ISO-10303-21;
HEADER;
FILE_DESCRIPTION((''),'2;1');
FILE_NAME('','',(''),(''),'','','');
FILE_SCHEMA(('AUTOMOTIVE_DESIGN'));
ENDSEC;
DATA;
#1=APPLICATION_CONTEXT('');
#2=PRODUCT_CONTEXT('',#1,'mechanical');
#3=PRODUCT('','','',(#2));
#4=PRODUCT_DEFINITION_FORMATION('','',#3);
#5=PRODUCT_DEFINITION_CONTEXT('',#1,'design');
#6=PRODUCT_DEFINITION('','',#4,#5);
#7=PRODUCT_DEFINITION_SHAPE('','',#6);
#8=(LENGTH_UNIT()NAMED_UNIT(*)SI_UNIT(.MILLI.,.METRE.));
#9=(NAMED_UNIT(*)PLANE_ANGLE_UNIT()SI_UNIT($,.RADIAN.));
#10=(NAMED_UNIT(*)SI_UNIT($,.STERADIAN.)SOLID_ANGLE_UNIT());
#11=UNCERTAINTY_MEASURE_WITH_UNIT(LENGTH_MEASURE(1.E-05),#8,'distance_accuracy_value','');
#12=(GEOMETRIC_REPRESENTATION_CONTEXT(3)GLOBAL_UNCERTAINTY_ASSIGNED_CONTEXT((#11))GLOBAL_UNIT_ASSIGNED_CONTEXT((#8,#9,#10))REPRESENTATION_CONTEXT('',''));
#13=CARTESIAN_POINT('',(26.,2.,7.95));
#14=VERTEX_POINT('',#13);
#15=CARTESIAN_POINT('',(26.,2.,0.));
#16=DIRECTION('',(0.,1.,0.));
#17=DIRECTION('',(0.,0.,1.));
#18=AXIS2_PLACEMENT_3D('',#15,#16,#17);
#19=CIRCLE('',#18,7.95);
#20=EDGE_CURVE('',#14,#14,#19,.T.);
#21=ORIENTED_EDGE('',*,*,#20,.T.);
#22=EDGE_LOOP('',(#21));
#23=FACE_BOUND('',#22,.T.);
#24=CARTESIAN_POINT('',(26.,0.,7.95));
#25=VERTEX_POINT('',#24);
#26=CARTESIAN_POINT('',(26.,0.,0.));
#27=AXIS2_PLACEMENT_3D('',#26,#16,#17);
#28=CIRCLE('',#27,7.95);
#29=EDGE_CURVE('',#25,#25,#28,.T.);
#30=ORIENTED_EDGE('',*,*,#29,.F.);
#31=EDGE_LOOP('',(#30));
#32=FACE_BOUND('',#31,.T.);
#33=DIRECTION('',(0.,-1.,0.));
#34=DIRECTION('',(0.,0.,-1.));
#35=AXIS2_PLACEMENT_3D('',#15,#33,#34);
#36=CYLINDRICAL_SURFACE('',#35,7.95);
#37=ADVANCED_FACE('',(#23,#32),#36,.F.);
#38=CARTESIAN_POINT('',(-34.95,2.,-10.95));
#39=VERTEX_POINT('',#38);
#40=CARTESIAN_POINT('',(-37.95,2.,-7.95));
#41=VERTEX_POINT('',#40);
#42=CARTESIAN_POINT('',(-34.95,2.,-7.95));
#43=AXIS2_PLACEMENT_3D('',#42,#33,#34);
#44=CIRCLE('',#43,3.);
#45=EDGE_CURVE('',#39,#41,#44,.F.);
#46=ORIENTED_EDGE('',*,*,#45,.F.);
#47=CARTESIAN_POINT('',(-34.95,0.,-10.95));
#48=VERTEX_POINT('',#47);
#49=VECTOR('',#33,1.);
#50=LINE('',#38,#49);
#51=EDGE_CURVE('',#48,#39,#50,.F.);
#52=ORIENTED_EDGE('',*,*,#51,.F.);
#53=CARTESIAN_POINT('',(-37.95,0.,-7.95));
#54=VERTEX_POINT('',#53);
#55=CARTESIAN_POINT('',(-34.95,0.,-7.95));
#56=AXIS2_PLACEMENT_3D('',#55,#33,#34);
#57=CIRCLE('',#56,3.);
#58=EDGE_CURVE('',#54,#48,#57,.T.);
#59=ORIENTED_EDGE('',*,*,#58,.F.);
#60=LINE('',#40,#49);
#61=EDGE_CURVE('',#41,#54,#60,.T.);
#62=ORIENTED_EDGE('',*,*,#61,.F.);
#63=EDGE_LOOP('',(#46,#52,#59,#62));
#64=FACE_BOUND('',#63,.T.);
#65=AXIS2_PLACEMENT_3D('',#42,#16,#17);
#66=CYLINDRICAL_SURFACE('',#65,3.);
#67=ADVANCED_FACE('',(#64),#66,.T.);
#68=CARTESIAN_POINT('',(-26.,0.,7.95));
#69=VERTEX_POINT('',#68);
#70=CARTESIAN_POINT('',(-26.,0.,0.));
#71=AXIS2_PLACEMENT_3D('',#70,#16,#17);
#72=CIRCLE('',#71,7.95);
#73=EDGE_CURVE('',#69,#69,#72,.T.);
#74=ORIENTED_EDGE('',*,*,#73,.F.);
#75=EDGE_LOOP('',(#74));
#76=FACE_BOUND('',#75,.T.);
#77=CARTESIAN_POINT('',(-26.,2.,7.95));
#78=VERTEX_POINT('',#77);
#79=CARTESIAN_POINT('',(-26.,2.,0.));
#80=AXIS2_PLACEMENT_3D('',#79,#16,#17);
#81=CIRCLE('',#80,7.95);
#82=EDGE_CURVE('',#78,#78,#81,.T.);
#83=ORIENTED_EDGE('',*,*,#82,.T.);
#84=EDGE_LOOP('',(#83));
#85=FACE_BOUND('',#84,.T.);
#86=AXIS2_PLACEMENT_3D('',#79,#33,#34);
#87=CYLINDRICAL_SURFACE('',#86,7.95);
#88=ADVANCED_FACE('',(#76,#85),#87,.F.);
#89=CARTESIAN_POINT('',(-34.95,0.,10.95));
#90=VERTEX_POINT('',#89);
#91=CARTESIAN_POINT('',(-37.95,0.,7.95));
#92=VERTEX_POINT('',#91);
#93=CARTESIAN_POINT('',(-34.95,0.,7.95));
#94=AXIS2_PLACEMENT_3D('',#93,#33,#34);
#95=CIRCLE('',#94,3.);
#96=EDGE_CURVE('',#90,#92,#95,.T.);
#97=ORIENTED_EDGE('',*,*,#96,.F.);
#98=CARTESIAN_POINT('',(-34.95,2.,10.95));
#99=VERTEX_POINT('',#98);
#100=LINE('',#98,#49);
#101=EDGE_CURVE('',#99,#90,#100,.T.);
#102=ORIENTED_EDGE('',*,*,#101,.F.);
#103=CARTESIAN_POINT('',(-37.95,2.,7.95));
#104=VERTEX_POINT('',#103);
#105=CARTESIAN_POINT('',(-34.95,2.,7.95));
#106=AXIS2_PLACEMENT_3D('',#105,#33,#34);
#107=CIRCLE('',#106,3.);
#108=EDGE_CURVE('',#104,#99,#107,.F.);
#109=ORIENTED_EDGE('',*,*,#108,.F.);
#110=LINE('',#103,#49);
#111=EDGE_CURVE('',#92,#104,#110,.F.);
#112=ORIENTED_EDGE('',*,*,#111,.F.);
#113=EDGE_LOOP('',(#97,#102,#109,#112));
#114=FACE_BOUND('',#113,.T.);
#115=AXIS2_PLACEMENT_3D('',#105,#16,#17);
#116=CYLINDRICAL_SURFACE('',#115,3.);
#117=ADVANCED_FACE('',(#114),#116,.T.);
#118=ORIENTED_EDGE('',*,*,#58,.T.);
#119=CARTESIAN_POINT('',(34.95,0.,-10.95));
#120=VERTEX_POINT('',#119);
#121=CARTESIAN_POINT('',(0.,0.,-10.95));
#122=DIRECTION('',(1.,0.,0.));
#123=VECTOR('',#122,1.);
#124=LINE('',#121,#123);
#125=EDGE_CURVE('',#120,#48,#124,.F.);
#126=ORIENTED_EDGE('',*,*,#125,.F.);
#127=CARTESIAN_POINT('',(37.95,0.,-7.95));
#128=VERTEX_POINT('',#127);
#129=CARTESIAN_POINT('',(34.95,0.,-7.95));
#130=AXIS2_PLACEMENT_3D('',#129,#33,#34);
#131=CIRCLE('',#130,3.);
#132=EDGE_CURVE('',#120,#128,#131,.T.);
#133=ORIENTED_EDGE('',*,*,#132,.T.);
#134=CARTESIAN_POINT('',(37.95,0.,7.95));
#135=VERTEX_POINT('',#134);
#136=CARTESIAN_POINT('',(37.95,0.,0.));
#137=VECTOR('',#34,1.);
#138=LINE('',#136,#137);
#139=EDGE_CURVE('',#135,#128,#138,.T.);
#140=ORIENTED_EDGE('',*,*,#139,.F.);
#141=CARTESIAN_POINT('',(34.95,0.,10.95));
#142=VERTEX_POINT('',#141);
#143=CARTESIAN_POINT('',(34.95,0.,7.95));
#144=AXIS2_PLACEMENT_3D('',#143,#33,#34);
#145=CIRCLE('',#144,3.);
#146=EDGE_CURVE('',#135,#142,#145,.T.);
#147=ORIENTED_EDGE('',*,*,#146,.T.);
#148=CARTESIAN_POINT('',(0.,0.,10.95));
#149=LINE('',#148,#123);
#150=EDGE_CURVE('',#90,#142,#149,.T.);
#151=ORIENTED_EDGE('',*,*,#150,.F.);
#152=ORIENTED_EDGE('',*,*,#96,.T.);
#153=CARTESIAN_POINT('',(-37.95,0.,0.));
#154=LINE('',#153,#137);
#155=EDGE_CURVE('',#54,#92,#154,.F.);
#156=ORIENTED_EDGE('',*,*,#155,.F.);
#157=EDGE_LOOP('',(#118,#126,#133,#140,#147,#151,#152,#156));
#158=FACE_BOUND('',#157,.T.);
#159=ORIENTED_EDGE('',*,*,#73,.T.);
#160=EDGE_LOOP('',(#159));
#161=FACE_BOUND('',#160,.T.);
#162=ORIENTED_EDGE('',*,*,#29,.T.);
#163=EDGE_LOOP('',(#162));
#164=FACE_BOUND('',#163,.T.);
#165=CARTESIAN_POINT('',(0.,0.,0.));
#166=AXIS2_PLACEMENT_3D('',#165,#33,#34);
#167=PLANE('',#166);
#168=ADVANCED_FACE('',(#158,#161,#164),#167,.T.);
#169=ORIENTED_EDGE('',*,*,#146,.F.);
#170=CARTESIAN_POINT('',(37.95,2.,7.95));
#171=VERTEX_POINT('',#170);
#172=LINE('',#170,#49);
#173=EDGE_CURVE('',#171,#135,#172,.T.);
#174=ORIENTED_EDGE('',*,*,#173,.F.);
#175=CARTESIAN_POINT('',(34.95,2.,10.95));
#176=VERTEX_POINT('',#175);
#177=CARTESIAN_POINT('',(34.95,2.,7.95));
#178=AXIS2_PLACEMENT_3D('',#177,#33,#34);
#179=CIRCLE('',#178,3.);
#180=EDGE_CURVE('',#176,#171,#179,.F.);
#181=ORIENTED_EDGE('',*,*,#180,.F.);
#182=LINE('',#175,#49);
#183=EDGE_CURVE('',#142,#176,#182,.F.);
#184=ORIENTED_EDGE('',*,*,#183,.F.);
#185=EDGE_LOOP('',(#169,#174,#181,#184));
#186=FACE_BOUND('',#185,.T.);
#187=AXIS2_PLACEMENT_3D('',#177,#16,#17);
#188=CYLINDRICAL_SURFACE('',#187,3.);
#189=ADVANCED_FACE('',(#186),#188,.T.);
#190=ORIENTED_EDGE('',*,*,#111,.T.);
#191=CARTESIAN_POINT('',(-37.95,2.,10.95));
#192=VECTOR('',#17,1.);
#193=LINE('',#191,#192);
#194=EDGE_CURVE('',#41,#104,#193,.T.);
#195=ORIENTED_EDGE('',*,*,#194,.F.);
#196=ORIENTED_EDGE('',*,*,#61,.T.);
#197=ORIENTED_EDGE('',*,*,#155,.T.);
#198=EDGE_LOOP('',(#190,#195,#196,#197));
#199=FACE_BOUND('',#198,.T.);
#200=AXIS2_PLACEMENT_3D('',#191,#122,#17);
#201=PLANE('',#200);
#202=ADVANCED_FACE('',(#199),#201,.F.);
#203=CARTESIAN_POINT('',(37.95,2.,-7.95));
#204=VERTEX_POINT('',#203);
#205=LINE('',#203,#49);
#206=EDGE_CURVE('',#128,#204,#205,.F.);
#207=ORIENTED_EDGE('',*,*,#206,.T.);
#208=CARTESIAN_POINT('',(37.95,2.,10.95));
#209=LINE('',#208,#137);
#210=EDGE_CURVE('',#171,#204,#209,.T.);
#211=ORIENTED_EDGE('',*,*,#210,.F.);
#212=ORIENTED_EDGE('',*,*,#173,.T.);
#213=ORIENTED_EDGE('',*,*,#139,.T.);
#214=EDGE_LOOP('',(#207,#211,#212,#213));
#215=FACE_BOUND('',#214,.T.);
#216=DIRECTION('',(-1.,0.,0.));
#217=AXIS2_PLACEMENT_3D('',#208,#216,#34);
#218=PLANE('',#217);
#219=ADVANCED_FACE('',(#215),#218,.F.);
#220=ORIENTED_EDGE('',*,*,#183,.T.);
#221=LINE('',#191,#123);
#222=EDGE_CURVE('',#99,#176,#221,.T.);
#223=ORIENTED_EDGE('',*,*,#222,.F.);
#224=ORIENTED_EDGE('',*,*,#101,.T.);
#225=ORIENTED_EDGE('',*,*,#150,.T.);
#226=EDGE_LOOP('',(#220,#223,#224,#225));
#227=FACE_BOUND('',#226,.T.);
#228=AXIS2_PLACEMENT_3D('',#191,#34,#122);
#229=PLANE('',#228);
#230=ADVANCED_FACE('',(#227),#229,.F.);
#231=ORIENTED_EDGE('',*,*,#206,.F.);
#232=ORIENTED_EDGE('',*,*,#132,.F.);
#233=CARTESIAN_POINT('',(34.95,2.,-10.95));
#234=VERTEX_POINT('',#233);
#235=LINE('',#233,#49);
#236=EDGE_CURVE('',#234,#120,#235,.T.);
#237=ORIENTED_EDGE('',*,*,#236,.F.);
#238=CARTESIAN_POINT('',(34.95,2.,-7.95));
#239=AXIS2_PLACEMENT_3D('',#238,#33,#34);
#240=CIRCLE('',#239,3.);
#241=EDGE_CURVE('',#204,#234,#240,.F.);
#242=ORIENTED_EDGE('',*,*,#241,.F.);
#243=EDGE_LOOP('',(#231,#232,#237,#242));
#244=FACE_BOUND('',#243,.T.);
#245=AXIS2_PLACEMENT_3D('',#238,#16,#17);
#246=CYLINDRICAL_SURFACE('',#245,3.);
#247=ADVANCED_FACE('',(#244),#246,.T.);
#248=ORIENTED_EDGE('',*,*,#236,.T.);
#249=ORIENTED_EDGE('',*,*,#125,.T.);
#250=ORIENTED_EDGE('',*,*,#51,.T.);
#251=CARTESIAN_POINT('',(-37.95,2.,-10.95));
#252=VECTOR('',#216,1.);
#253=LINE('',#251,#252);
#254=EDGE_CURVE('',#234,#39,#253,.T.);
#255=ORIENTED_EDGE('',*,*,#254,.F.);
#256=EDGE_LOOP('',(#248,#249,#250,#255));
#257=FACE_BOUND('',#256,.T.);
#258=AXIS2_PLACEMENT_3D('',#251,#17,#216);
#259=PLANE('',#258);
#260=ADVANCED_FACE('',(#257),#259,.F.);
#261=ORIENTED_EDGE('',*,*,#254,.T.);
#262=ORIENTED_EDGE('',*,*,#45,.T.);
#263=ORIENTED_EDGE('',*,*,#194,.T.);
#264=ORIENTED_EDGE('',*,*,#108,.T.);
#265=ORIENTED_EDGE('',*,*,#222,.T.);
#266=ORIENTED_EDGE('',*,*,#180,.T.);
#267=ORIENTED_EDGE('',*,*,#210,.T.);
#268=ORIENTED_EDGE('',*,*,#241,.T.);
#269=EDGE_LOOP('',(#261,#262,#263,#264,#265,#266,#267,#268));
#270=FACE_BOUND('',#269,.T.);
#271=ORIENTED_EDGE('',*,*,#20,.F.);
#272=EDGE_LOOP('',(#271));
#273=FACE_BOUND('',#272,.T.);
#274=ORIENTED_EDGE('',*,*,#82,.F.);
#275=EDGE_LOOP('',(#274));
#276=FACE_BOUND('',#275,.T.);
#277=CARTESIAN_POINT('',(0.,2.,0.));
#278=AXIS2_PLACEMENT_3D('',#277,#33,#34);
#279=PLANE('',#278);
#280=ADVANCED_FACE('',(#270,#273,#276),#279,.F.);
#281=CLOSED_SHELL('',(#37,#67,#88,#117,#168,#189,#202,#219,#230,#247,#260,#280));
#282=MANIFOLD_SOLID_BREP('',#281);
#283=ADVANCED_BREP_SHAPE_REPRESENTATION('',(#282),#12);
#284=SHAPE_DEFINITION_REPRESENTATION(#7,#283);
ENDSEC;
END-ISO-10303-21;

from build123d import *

# Parameters (mm, degrees)
SKETCH1_W           = 75.9
SKETCH1_H           = 21.9
SKETCH1_R           = 7.95
BOSS_EXTRUDE1_DEPTH = 2
FILLET1_R           = 3


with BuildPart() as part:
    # Sketch1 → Boss-Extrude1 (new body)
    with BuildSketch(Plane(origin=(0, 0, 0), x_dir=(1, 0, 0), z_dir=(0, 1, 0))):
        Rectangle(SKETCH1_W, SKETCH1_H)
        with Locations(Location((26, 0, 0), (0, 0, 270))):
            Circle(SKETCH1_R, mode=Mode.SUBTRACT)
        with Locations(Location((-26, 0, 0), (0, 0, 270))):
            Circle(SKETCH1_R, mode=Mode.SUBTRACT)
    extrude(amount=BOSS_EXTRUDE1_DEPTH)

    # Fillet1
    fillet1_edges = [part.edges().sort_by_distance(p)[0] for p in [
        (37.95, 1, -10.95),
        (37.95, 1, 10.95),
        (-37.95, 1, 10.95),
        (-37.95, 1, -10.95),
    ]]
    fillet(fillet1_edges, radius=FILLET1_R)


solid = part.part
